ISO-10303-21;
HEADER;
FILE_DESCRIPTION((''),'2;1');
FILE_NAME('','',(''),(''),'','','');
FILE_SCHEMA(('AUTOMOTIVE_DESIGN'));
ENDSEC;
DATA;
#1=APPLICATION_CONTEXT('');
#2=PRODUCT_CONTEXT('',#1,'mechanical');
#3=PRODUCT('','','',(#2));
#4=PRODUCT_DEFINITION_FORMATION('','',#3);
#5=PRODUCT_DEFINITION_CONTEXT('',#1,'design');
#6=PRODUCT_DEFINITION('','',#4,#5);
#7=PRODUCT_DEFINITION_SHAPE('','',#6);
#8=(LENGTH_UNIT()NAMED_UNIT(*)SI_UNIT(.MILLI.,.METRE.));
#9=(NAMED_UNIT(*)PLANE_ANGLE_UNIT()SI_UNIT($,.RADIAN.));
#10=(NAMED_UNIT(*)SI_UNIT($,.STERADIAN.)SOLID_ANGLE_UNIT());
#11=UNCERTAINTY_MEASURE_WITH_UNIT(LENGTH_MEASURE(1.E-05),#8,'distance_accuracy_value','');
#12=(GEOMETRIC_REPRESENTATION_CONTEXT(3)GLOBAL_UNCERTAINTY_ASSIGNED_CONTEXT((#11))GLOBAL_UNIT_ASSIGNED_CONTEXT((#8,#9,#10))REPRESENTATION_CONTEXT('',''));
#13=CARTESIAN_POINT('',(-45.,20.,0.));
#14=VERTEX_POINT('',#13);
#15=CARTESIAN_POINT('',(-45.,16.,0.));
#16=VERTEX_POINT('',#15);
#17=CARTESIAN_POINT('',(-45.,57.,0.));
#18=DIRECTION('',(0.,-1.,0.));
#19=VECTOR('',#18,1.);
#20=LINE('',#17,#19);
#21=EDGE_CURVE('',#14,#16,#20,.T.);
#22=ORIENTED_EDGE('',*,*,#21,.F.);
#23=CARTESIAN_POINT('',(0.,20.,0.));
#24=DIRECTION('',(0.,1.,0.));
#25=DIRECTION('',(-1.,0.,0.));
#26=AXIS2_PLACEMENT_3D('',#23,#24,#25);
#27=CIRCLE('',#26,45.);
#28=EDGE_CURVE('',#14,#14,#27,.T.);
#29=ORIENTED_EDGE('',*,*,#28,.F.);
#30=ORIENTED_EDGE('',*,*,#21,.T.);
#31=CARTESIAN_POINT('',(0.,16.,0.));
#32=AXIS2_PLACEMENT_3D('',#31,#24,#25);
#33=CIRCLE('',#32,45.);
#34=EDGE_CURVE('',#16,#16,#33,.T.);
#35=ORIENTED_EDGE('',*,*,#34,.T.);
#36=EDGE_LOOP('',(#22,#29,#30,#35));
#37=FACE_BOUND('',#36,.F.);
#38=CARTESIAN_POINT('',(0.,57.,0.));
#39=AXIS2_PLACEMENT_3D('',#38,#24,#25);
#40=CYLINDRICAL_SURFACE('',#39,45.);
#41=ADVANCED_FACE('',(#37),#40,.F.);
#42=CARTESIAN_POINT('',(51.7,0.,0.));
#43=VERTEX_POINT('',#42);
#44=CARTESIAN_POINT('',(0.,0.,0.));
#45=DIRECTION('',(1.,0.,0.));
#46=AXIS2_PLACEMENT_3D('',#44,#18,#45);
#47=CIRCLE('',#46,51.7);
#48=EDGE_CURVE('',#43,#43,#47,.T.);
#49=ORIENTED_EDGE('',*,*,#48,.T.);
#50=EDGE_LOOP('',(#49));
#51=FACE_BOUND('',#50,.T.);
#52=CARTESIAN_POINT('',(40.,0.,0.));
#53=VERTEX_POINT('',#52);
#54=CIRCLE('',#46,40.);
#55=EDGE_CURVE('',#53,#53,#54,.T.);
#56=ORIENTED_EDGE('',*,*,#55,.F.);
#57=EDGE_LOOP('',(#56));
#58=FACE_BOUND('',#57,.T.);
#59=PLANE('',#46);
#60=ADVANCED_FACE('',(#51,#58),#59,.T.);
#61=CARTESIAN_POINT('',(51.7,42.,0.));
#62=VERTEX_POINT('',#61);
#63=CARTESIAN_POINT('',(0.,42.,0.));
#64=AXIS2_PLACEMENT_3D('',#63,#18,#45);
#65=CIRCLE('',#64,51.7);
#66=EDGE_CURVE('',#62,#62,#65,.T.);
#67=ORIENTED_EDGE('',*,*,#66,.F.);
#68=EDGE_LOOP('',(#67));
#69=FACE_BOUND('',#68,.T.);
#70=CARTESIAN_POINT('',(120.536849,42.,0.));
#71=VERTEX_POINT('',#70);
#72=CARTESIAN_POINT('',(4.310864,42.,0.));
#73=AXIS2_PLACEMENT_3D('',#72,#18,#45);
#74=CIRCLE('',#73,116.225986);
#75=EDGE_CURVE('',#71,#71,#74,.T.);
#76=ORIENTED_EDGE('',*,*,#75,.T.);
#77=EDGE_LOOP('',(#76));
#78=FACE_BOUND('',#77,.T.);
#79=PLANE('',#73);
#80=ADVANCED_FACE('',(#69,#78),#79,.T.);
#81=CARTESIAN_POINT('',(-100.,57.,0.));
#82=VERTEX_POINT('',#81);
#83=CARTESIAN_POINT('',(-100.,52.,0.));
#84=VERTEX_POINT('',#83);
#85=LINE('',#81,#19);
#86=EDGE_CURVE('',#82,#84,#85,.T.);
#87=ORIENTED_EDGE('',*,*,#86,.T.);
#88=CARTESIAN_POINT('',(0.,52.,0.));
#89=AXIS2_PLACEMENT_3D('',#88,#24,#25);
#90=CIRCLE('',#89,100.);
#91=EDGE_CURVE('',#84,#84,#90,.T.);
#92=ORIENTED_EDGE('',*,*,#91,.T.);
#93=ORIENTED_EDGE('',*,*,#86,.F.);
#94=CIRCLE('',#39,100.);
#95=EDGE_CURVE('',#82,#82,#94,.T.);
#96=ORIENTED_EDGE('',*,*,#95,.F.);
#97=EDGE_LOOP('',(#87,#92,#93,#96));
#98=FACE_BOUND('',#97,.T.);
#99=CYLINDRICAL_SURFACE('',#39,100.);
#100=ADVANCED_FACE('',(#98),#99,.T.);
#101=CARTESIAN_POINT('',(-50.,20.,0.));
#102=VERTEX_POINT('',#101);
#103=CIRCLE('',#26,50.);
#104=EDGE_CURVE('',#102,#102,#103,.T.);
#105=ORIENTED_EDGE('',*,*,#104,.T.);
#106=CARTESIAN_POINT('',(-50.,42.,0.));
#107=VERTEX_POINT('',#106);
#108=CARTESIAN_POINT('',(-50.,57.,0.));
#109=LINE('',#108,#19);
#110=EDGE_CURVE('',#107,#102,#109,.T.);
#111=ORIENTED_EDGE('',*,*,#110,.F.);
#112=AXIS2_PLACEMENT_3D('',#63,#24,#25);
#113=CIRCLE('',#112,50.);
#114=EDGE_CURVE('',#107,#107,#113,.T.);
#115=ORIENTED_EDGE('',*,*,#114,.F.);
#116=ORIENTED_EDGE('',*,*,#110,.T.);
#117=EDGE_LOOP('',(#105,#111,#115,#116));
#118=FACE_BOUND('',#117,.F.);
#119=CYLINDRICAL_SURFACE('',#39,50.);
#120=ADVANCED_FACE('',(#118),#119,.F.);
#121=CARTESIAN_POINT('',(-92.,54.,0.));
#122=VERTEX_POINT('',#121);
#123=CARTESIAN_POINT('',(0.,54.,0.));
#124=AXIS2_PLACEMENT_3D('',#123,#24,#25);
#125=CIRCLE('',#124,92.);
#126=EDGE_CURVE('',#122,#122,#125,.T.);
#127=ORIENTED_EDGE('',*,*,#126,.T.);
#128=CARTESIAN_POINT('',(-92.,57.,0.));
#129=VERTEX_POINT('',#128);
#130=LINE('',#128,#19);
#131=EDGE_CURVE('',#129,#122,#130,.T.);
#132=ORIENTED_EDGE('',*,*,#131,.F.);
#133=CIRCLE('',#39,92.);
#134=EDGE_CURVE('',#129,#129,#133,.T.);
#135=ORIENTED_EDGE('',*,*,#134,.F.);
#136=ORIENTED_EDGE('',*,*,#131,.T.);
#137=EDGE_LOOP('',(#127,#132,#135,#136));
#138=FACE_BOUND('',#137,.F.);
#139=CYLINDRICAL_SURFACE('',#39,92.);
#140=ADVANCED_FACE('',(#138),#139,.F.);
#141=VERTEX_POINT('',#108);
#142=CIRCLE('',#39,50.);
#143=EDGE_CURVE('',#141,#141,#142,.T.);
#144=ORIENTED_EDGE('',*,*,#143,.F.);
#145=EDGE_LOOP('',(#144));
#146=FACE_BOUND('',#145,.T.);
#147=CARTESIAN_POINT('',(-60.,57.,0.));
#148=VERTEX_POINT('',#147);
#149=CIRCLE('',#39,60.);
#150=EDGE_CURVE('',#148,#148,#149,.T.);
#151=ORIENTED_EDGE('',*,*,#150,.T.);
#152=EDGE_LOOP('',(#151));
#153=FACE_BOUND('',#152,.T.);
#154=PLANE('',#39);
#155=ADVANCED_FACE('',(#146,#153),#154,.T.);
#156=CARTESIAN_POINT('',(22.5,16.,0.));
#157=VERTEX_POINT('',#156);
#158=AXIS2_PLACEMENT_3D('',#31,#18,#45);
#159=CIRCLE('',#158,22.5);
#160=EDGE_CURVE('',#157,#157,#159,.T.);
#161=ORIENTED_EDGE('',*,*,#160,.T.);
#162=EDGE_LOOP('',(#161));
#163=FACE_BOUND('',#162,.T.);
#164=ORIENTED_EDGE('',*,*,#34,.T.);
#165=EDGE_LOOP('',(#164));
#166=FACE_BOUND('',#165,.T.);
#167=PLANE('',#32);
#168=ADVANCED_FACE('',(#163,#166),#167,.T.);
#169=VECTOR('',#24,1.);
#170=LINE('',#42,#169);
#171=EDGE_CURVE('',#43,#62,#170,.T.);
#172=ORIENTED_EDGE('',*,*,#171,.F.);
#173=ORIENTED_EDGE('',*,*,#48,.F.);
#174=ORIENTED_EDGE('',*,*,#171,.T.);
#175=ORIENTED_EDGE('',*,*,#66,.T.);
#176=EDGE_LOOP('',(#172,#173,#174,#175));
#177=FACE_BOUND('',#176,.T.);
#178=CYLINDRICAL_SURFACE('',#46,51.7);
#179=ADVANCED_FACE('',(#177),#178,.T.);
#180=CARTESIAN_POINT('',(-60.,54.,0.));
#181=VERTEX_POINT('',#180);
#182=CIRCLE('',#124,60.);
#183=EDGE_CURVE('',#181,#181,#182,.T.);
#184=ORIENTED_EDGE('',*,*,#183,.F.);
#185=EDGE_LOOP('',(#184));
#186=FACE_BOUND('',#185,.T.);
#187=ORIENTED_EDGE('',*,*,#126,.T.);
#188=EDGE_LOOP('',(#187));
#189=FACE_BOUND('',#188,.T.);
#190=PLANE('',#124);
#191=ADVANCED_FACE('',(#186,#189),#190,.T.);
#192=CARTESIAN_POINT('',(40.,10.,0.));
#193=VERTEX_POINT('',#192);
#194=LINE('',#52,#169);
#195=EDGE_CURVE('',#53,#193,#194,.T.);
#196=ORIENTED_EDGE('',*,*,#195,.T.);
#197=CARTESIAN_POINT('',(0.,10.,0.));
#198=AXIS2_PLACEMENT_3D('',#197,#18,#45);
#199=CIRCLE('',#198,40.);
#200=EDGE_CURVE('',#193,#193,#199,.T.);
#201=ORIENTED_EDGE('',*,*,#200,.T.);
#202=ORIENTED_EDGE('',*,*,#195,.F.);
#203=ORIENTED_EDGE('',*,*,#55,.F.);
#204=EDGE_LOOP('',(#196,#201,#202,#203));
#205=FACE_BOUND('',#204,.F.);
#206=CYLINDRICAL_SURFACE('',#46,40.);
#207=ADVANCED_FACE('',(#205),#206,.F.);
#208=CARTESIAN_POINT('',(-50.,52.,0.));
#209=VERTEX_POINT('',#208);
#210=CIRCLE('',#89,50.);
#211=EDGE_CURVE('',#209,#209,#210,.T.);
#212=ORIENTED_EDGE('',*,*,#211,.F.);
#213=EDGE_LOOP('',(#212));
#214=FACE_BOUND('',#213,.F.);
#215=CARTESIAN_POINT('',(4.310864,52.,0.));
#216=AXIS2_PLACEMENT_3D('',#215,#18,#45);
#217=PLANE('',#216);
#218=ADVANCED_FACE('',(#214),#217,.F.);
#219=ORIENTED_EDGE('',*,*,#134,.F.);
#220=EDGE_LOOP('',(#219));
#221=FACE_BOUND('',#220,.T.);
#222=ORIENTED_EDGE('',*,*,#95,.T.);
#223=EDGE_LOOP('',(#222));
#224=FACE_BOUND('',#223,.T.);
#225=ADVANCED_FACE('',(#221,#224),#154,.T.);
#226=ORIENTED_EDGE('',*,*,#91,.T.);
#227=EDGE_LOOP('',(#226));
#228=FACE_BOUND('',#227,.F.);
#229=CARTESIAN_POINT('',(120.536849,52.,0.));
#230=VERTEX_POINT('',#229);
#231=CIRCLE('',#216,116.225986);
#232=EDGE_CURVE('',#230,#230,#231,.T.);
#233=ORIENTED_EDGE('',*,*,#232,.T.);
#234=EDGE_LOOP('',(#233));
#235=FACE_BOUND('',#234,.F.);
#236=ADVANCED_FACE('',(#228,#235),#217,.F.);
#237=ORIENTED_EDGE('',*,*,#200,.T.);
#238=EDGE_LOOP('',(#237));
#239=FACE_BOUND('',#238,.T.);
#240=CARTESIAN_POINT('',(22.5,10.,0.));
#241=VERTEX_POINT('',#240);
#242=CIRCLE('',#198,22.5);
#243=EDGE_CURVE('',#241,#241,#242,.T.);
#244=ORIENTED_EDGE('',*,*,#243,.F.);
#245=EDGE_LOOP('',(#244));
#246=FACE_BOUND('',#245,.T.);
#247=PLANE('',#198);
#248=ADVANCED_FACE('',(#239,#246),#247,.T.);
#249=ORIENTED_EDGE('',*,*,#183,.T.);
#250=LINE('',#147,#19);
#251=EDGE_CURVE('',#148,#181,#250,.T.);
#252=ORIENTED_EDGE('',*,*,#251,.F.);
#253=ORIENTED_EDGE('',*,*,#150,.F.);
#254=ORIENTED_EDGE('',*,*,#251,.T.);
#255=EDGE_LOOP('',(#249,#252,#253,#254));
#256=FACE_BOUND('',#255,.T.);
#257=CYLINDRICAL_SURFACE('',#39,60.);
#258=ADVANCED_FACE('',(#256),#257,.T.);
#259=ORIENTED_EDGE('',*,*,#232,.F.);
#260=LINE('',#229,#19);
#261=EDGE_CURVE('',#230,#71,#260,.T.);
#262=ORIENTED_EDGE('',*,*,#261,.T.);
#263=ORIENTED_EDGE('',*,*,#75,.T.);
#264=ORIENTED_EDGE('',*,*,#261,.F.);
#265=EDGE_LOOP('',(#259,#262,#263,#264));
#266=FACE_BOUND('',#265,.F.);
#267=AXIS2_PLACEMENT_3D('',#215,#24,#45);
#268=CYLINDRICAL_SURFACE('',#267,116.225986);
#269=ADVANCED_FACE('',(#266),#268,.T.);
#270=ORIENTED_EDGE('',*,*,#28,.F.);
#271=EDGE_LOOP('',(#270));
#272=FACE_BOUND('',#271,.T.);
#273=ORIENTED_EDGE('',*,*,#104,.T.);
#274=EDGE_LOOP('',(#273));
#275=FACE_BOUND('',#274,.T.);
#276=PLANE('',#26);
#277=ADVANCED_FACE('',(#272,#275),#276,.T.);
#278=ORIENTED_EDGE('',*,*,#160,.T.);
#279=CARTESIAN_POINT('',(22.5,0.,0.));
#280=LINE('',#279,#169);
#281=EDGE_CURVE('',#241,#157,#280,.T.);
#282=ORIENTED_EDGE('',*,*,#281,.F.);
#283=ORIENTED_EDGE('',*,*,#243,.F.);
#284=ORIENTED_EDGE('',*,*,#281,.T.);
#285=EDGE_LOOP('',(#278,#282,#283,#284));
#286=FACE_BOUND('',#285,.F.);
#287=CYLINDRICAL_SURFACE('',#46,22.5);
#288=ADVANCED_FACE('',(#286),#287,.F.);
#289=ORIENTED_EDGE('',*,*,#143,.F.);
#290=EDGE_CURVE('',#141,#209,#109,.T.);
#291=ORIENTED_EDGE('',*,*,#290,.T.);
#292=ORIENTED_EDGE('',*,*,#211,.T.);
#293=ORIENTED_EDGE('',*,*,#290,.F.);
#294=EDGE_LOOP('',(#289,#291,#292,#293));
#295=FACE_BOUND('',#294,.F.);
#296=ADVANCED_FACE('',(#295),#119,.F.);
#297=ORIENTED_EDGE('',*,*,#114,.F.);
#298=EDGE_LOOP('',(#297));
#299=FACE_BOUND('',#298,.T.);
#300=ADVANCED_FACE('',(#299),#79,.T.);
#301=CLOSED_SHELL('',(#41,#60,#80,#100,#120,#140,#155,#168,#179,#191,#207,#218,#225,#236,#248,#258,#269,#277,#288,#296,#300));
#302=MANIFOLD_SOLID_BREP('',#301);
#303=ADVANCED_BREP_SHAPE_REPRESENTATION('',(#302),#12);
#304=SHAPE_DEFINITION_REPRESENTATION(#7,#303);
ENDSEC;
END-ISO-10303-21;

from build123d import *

# Parameters (mm, degrees)
F0_R      = 51.7
F0_R_2    = 40
F0_R_3    = 22.5
F1_DEPTH  = 57
F2_DEPTH  = 10
F3_DEPTH  = 16
F4_R      = 50
F4_R_2    = 45
F5_DEPTH  = 37
F6_DEPTH  = 41
F4_R_3    = 100
F4_R_4    = 92
F4_R_5    = 60
F4_R_6    = 51.7
F7_DEPTH  = 5
F8_DEPTH  = 3
F9_R      = 116.2259856664
F10_DEPTH = 10


# Not quite as in the source:
# - a feature names something its author has since deleted; it is built from what else it names


with BuildPart() as f1:
    # F0 (on Front) → F1 (new body)
    with BuildSketch(Plane.XZ):
        Circle(F0_R)
        Circle(F0_R_2, mode=Mode.SUBTRACT)
        Circle(F0_R_2)
        Circle(F0_R_3, mode=Mode.SUBTRACT)
        Circle(F0_R_3)
    extrude(amount=-F1_DEPTH)

    # F0 (on Front) → F2 (cut)
    with BuildSketch(Plane.XZ):
        Circle(F0_R_2)
        Circle(F0_R_3, mode=Mode.SUBTRACT)
    extrude(amount=-F2_DEPTH, mode=Mode.SUBTRACT)

    # F0 (on Front) → F3 (cut)
    with BuildSketch(Plane.XZ):
        Circle(F0_R_3)
    extrude(amount=-F3_DEPTH, mode=Mode.SUBTRACT)

    # F4 (on face) → F5 (cut)
    with BuildSketch(Plane(origin=(0, 57, 0), x_dir=(-1, 0, 0), z_dir=(0, 1, 0))):
        Circle(F4_R)
        Circle(F4_R_2, mode=Mode.SUBTRACT)
    extrude(amount=-F5_DEPTH, mode=Mode.SUBTRACT)

    # F4 (on face) → F6 (cut)
    with BuildSketch(Plane(origin=(0, 57, 0), x_dir=(-1, 0, 0), z_dir=(0, 1, 0))):
        Circle(F4_R_2)
    extrude(amount=-F6_DEPTH, mode=Mode.SUBTRACT)

    # F4 (on face) → F7 (join)
    with BuildSketch(Plane(origin=(0, 57, 0), x_dir=(-1, 0, 0), z_dir=(0, 1, 0))):
        Circle(F4_R_3)
        Circle(F4_R_4, mode=Mode.SUBTRACT)
        Circle(F4_R_4)
        Circle(F4_R_5, mode=Mode.SUBTRACT)
        Circle(F4_R_5)
        Circle(F4_R_6, mode=Mode.SUBTRACT)
    extrude(amount=-F7_DEPTH)

    # F4 (on face) → F8 (cut)
    with BuildSketch(Plane(origin=(0, 57, 0), x_dir=(-1, 0, 0), z_dir=(0, 1, 0))):
        Circle(F4_R_4)
        Circle(F4_R_5, mode=Mode.SUBTRACT)
    extrude(amount=-F8_DEPTH, mode=Mode.SUBTRACT)

    # F9 (on face) → F10 (join)
    with BuildSketch(Plane.XZ.offset(-52)):
        with Locations((4.3108635582, 0)):
            Circle(F9_R)
    extrude(amount=F10_DEPTH)


solid = f1.part
